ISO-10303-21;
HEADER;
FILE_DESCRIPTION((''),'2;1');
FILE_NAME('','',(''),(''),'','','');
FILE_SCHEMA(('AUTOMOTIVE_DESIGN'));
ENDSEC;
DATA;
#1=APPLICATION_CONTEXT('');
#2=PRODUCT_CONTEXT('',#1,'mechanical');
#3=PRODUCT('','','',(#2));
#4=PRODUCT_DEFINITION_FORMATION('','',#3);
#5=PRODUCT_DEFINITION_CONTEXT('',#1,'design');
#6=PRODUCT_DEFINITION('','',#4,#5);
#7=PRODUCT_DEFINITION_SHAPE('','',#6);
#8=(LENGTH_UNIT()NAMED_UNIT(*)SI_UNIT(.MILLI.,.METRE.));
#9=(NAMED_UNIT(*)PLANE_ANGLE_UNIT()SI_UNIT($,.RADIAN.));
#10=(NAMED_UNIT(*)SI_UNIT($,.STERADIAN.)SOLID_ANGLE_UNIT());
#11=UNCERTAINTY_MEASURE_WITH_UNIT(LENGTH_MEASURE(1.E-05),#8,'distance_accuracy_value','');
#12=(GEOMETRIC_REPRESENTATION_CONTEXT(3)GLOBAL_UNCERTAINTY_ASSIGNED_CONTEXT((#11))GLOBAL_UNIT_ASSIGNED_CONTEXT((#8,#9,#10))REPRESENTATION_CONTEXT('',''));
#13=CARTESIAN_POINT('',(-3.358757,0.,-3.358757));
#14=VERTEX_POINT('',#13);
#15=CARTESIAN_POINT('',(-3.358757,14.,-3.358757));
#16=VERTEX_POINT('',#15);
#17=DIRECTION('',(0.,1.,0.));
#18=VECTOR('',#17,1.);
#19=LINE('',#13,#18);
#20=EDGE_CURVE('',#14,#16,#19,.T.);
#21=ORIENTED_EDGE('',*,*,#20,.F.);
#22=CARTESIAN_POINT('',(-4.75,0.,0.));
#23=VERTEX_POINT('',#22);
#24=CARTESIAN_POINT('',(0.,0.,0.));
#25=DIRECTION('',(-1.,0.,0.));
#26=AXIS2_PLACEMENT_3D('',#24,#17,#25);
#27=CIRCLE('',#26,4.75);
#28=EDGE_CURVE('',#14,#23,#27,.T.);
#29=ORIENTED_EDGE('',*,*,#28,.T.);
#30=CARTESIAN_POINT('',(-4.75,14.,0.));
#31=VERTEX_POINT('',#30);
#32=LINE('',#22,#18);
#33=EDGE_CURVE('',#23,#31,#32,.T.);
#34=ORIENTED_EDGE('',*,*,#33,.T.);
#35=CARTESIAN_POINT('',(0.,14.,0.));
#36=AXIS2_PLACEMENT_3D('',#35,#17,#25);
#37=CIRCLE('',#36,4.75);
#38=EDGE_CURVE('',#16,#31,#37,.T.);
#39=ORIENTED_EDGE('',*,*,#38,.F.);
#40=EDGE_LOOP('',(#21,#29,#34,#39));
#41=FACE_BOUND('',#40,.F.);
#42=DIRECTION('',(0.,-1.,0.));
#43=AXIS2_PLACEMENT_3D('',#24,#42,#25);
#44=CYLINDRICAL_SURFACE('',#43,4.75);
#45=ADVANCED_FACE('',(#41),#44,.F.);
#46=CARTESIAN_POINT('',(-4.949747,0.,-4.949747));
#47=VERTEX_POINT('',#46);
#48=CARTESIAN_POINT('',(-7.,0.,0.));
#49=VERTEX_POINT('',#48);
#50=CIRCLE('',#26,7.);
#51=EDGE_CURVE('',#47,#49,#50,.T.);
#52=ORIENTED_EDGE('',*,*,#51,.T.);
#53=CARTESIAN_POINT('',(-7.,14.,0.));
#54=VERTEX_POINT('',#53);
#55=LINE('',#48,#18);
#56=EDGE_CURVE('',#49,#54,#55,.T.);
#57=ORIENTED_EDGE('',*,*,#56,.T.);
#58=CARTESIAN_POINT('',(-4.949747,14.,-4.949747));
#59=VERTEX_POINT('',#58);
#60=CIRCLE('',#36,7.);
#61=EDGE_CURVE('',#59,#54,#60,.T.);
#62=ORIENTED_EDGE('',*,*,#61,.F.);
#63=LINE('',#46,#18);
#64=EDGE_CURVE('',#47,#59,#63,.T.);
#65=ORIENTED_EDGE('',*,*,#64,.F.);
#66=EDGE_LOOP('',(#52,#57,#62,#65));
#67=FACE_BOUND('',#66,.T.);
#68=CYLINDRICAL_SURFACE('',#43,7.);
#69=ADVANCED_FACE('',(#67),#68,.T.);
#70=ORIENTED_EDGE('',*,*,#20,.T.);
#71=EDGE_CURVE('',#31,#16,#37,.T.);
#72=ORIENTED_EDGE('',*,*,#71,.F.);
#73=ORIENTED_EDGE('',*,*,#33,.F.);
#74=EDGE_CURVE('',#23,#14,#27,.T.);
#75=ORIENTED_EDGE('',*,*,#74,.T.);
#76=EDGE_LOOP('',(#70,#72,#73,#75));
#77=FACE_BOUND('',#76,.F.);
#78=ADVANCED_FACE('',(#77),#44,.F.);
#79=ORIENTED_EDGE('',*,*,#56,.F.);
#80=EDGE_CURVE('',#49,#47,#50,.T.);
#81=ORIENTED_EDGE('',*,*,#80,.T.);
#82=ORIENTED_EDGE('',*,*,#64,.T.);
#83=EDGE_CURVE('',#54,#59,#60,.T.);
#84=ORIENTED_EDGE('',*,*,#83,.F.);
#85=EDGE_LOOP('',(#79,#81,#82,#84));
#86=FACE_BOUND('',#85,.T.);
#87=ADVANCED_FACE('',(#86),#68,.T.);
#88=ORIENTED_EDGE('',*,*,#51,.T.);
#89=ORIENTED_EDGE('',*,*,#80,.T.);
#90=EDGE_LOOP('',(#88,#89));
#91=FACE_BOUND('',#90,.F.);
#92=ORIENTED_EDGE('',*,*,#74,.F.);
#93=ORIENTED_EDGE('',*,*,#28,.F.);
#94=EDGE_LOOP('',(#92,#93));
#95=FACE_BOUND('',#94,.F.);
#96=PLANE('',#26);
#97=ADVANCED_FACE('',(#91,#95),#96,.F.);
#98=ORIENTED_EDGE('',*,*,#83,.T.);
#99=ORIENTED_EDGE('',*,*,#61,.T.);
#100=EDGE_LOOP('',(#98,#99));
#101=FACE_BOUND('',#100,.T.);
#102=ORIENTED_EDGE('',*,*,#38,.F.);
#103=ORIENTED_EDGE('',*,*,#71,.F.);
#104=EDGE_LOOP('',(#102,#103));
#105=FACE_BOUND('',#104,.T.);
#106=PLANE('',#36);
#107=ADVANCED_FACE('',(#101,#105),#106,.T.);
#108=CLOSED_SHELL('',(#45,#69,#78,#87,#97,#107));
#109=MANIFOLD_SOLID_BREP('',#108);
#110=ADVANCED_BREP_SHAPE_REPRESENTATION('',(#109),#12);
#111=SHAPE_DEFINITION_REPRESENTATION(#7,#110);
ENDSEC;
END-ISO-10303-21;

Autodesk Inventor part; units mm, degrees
ref_plane "YZ Plane" through (0, 0, 0) normal (1, 0, 0) x (0, 1, 0)
ref_plane "XZ Plane" through (0, 0, 0) normal (0, 1, 0) x (-1, 0, 0)
ref_plane "XY Plane" through (0, 0, 0) normal (0, 0, 1) x (1, 0, 0)
sketch "Sketch1" plane through (0, 0, 0) normal (0, 1, 0) x (-1, 0, 0)
  circle A0 centre (0, 0) radius 4.75
  line L0 (0, 0) -> (15.4998, -15.4998)
  line L1 (0, 0) -> (21.92, 0) construction
  circle A1 centre (15.4998, -15.4998) radius 10.75
  circle A2 centre (0, 0) radius 7
  dimension "d0" = 9.5
  dimension "d1" = 21.92
  dimension "d2" = 45
  dimension "d3" = 21.5
  dimension "d4" = 14
extrude "Extrusion1" add sketch "Sketch1" along normal blind 14 contours A2
properties part number "Idle_pulley_small"
